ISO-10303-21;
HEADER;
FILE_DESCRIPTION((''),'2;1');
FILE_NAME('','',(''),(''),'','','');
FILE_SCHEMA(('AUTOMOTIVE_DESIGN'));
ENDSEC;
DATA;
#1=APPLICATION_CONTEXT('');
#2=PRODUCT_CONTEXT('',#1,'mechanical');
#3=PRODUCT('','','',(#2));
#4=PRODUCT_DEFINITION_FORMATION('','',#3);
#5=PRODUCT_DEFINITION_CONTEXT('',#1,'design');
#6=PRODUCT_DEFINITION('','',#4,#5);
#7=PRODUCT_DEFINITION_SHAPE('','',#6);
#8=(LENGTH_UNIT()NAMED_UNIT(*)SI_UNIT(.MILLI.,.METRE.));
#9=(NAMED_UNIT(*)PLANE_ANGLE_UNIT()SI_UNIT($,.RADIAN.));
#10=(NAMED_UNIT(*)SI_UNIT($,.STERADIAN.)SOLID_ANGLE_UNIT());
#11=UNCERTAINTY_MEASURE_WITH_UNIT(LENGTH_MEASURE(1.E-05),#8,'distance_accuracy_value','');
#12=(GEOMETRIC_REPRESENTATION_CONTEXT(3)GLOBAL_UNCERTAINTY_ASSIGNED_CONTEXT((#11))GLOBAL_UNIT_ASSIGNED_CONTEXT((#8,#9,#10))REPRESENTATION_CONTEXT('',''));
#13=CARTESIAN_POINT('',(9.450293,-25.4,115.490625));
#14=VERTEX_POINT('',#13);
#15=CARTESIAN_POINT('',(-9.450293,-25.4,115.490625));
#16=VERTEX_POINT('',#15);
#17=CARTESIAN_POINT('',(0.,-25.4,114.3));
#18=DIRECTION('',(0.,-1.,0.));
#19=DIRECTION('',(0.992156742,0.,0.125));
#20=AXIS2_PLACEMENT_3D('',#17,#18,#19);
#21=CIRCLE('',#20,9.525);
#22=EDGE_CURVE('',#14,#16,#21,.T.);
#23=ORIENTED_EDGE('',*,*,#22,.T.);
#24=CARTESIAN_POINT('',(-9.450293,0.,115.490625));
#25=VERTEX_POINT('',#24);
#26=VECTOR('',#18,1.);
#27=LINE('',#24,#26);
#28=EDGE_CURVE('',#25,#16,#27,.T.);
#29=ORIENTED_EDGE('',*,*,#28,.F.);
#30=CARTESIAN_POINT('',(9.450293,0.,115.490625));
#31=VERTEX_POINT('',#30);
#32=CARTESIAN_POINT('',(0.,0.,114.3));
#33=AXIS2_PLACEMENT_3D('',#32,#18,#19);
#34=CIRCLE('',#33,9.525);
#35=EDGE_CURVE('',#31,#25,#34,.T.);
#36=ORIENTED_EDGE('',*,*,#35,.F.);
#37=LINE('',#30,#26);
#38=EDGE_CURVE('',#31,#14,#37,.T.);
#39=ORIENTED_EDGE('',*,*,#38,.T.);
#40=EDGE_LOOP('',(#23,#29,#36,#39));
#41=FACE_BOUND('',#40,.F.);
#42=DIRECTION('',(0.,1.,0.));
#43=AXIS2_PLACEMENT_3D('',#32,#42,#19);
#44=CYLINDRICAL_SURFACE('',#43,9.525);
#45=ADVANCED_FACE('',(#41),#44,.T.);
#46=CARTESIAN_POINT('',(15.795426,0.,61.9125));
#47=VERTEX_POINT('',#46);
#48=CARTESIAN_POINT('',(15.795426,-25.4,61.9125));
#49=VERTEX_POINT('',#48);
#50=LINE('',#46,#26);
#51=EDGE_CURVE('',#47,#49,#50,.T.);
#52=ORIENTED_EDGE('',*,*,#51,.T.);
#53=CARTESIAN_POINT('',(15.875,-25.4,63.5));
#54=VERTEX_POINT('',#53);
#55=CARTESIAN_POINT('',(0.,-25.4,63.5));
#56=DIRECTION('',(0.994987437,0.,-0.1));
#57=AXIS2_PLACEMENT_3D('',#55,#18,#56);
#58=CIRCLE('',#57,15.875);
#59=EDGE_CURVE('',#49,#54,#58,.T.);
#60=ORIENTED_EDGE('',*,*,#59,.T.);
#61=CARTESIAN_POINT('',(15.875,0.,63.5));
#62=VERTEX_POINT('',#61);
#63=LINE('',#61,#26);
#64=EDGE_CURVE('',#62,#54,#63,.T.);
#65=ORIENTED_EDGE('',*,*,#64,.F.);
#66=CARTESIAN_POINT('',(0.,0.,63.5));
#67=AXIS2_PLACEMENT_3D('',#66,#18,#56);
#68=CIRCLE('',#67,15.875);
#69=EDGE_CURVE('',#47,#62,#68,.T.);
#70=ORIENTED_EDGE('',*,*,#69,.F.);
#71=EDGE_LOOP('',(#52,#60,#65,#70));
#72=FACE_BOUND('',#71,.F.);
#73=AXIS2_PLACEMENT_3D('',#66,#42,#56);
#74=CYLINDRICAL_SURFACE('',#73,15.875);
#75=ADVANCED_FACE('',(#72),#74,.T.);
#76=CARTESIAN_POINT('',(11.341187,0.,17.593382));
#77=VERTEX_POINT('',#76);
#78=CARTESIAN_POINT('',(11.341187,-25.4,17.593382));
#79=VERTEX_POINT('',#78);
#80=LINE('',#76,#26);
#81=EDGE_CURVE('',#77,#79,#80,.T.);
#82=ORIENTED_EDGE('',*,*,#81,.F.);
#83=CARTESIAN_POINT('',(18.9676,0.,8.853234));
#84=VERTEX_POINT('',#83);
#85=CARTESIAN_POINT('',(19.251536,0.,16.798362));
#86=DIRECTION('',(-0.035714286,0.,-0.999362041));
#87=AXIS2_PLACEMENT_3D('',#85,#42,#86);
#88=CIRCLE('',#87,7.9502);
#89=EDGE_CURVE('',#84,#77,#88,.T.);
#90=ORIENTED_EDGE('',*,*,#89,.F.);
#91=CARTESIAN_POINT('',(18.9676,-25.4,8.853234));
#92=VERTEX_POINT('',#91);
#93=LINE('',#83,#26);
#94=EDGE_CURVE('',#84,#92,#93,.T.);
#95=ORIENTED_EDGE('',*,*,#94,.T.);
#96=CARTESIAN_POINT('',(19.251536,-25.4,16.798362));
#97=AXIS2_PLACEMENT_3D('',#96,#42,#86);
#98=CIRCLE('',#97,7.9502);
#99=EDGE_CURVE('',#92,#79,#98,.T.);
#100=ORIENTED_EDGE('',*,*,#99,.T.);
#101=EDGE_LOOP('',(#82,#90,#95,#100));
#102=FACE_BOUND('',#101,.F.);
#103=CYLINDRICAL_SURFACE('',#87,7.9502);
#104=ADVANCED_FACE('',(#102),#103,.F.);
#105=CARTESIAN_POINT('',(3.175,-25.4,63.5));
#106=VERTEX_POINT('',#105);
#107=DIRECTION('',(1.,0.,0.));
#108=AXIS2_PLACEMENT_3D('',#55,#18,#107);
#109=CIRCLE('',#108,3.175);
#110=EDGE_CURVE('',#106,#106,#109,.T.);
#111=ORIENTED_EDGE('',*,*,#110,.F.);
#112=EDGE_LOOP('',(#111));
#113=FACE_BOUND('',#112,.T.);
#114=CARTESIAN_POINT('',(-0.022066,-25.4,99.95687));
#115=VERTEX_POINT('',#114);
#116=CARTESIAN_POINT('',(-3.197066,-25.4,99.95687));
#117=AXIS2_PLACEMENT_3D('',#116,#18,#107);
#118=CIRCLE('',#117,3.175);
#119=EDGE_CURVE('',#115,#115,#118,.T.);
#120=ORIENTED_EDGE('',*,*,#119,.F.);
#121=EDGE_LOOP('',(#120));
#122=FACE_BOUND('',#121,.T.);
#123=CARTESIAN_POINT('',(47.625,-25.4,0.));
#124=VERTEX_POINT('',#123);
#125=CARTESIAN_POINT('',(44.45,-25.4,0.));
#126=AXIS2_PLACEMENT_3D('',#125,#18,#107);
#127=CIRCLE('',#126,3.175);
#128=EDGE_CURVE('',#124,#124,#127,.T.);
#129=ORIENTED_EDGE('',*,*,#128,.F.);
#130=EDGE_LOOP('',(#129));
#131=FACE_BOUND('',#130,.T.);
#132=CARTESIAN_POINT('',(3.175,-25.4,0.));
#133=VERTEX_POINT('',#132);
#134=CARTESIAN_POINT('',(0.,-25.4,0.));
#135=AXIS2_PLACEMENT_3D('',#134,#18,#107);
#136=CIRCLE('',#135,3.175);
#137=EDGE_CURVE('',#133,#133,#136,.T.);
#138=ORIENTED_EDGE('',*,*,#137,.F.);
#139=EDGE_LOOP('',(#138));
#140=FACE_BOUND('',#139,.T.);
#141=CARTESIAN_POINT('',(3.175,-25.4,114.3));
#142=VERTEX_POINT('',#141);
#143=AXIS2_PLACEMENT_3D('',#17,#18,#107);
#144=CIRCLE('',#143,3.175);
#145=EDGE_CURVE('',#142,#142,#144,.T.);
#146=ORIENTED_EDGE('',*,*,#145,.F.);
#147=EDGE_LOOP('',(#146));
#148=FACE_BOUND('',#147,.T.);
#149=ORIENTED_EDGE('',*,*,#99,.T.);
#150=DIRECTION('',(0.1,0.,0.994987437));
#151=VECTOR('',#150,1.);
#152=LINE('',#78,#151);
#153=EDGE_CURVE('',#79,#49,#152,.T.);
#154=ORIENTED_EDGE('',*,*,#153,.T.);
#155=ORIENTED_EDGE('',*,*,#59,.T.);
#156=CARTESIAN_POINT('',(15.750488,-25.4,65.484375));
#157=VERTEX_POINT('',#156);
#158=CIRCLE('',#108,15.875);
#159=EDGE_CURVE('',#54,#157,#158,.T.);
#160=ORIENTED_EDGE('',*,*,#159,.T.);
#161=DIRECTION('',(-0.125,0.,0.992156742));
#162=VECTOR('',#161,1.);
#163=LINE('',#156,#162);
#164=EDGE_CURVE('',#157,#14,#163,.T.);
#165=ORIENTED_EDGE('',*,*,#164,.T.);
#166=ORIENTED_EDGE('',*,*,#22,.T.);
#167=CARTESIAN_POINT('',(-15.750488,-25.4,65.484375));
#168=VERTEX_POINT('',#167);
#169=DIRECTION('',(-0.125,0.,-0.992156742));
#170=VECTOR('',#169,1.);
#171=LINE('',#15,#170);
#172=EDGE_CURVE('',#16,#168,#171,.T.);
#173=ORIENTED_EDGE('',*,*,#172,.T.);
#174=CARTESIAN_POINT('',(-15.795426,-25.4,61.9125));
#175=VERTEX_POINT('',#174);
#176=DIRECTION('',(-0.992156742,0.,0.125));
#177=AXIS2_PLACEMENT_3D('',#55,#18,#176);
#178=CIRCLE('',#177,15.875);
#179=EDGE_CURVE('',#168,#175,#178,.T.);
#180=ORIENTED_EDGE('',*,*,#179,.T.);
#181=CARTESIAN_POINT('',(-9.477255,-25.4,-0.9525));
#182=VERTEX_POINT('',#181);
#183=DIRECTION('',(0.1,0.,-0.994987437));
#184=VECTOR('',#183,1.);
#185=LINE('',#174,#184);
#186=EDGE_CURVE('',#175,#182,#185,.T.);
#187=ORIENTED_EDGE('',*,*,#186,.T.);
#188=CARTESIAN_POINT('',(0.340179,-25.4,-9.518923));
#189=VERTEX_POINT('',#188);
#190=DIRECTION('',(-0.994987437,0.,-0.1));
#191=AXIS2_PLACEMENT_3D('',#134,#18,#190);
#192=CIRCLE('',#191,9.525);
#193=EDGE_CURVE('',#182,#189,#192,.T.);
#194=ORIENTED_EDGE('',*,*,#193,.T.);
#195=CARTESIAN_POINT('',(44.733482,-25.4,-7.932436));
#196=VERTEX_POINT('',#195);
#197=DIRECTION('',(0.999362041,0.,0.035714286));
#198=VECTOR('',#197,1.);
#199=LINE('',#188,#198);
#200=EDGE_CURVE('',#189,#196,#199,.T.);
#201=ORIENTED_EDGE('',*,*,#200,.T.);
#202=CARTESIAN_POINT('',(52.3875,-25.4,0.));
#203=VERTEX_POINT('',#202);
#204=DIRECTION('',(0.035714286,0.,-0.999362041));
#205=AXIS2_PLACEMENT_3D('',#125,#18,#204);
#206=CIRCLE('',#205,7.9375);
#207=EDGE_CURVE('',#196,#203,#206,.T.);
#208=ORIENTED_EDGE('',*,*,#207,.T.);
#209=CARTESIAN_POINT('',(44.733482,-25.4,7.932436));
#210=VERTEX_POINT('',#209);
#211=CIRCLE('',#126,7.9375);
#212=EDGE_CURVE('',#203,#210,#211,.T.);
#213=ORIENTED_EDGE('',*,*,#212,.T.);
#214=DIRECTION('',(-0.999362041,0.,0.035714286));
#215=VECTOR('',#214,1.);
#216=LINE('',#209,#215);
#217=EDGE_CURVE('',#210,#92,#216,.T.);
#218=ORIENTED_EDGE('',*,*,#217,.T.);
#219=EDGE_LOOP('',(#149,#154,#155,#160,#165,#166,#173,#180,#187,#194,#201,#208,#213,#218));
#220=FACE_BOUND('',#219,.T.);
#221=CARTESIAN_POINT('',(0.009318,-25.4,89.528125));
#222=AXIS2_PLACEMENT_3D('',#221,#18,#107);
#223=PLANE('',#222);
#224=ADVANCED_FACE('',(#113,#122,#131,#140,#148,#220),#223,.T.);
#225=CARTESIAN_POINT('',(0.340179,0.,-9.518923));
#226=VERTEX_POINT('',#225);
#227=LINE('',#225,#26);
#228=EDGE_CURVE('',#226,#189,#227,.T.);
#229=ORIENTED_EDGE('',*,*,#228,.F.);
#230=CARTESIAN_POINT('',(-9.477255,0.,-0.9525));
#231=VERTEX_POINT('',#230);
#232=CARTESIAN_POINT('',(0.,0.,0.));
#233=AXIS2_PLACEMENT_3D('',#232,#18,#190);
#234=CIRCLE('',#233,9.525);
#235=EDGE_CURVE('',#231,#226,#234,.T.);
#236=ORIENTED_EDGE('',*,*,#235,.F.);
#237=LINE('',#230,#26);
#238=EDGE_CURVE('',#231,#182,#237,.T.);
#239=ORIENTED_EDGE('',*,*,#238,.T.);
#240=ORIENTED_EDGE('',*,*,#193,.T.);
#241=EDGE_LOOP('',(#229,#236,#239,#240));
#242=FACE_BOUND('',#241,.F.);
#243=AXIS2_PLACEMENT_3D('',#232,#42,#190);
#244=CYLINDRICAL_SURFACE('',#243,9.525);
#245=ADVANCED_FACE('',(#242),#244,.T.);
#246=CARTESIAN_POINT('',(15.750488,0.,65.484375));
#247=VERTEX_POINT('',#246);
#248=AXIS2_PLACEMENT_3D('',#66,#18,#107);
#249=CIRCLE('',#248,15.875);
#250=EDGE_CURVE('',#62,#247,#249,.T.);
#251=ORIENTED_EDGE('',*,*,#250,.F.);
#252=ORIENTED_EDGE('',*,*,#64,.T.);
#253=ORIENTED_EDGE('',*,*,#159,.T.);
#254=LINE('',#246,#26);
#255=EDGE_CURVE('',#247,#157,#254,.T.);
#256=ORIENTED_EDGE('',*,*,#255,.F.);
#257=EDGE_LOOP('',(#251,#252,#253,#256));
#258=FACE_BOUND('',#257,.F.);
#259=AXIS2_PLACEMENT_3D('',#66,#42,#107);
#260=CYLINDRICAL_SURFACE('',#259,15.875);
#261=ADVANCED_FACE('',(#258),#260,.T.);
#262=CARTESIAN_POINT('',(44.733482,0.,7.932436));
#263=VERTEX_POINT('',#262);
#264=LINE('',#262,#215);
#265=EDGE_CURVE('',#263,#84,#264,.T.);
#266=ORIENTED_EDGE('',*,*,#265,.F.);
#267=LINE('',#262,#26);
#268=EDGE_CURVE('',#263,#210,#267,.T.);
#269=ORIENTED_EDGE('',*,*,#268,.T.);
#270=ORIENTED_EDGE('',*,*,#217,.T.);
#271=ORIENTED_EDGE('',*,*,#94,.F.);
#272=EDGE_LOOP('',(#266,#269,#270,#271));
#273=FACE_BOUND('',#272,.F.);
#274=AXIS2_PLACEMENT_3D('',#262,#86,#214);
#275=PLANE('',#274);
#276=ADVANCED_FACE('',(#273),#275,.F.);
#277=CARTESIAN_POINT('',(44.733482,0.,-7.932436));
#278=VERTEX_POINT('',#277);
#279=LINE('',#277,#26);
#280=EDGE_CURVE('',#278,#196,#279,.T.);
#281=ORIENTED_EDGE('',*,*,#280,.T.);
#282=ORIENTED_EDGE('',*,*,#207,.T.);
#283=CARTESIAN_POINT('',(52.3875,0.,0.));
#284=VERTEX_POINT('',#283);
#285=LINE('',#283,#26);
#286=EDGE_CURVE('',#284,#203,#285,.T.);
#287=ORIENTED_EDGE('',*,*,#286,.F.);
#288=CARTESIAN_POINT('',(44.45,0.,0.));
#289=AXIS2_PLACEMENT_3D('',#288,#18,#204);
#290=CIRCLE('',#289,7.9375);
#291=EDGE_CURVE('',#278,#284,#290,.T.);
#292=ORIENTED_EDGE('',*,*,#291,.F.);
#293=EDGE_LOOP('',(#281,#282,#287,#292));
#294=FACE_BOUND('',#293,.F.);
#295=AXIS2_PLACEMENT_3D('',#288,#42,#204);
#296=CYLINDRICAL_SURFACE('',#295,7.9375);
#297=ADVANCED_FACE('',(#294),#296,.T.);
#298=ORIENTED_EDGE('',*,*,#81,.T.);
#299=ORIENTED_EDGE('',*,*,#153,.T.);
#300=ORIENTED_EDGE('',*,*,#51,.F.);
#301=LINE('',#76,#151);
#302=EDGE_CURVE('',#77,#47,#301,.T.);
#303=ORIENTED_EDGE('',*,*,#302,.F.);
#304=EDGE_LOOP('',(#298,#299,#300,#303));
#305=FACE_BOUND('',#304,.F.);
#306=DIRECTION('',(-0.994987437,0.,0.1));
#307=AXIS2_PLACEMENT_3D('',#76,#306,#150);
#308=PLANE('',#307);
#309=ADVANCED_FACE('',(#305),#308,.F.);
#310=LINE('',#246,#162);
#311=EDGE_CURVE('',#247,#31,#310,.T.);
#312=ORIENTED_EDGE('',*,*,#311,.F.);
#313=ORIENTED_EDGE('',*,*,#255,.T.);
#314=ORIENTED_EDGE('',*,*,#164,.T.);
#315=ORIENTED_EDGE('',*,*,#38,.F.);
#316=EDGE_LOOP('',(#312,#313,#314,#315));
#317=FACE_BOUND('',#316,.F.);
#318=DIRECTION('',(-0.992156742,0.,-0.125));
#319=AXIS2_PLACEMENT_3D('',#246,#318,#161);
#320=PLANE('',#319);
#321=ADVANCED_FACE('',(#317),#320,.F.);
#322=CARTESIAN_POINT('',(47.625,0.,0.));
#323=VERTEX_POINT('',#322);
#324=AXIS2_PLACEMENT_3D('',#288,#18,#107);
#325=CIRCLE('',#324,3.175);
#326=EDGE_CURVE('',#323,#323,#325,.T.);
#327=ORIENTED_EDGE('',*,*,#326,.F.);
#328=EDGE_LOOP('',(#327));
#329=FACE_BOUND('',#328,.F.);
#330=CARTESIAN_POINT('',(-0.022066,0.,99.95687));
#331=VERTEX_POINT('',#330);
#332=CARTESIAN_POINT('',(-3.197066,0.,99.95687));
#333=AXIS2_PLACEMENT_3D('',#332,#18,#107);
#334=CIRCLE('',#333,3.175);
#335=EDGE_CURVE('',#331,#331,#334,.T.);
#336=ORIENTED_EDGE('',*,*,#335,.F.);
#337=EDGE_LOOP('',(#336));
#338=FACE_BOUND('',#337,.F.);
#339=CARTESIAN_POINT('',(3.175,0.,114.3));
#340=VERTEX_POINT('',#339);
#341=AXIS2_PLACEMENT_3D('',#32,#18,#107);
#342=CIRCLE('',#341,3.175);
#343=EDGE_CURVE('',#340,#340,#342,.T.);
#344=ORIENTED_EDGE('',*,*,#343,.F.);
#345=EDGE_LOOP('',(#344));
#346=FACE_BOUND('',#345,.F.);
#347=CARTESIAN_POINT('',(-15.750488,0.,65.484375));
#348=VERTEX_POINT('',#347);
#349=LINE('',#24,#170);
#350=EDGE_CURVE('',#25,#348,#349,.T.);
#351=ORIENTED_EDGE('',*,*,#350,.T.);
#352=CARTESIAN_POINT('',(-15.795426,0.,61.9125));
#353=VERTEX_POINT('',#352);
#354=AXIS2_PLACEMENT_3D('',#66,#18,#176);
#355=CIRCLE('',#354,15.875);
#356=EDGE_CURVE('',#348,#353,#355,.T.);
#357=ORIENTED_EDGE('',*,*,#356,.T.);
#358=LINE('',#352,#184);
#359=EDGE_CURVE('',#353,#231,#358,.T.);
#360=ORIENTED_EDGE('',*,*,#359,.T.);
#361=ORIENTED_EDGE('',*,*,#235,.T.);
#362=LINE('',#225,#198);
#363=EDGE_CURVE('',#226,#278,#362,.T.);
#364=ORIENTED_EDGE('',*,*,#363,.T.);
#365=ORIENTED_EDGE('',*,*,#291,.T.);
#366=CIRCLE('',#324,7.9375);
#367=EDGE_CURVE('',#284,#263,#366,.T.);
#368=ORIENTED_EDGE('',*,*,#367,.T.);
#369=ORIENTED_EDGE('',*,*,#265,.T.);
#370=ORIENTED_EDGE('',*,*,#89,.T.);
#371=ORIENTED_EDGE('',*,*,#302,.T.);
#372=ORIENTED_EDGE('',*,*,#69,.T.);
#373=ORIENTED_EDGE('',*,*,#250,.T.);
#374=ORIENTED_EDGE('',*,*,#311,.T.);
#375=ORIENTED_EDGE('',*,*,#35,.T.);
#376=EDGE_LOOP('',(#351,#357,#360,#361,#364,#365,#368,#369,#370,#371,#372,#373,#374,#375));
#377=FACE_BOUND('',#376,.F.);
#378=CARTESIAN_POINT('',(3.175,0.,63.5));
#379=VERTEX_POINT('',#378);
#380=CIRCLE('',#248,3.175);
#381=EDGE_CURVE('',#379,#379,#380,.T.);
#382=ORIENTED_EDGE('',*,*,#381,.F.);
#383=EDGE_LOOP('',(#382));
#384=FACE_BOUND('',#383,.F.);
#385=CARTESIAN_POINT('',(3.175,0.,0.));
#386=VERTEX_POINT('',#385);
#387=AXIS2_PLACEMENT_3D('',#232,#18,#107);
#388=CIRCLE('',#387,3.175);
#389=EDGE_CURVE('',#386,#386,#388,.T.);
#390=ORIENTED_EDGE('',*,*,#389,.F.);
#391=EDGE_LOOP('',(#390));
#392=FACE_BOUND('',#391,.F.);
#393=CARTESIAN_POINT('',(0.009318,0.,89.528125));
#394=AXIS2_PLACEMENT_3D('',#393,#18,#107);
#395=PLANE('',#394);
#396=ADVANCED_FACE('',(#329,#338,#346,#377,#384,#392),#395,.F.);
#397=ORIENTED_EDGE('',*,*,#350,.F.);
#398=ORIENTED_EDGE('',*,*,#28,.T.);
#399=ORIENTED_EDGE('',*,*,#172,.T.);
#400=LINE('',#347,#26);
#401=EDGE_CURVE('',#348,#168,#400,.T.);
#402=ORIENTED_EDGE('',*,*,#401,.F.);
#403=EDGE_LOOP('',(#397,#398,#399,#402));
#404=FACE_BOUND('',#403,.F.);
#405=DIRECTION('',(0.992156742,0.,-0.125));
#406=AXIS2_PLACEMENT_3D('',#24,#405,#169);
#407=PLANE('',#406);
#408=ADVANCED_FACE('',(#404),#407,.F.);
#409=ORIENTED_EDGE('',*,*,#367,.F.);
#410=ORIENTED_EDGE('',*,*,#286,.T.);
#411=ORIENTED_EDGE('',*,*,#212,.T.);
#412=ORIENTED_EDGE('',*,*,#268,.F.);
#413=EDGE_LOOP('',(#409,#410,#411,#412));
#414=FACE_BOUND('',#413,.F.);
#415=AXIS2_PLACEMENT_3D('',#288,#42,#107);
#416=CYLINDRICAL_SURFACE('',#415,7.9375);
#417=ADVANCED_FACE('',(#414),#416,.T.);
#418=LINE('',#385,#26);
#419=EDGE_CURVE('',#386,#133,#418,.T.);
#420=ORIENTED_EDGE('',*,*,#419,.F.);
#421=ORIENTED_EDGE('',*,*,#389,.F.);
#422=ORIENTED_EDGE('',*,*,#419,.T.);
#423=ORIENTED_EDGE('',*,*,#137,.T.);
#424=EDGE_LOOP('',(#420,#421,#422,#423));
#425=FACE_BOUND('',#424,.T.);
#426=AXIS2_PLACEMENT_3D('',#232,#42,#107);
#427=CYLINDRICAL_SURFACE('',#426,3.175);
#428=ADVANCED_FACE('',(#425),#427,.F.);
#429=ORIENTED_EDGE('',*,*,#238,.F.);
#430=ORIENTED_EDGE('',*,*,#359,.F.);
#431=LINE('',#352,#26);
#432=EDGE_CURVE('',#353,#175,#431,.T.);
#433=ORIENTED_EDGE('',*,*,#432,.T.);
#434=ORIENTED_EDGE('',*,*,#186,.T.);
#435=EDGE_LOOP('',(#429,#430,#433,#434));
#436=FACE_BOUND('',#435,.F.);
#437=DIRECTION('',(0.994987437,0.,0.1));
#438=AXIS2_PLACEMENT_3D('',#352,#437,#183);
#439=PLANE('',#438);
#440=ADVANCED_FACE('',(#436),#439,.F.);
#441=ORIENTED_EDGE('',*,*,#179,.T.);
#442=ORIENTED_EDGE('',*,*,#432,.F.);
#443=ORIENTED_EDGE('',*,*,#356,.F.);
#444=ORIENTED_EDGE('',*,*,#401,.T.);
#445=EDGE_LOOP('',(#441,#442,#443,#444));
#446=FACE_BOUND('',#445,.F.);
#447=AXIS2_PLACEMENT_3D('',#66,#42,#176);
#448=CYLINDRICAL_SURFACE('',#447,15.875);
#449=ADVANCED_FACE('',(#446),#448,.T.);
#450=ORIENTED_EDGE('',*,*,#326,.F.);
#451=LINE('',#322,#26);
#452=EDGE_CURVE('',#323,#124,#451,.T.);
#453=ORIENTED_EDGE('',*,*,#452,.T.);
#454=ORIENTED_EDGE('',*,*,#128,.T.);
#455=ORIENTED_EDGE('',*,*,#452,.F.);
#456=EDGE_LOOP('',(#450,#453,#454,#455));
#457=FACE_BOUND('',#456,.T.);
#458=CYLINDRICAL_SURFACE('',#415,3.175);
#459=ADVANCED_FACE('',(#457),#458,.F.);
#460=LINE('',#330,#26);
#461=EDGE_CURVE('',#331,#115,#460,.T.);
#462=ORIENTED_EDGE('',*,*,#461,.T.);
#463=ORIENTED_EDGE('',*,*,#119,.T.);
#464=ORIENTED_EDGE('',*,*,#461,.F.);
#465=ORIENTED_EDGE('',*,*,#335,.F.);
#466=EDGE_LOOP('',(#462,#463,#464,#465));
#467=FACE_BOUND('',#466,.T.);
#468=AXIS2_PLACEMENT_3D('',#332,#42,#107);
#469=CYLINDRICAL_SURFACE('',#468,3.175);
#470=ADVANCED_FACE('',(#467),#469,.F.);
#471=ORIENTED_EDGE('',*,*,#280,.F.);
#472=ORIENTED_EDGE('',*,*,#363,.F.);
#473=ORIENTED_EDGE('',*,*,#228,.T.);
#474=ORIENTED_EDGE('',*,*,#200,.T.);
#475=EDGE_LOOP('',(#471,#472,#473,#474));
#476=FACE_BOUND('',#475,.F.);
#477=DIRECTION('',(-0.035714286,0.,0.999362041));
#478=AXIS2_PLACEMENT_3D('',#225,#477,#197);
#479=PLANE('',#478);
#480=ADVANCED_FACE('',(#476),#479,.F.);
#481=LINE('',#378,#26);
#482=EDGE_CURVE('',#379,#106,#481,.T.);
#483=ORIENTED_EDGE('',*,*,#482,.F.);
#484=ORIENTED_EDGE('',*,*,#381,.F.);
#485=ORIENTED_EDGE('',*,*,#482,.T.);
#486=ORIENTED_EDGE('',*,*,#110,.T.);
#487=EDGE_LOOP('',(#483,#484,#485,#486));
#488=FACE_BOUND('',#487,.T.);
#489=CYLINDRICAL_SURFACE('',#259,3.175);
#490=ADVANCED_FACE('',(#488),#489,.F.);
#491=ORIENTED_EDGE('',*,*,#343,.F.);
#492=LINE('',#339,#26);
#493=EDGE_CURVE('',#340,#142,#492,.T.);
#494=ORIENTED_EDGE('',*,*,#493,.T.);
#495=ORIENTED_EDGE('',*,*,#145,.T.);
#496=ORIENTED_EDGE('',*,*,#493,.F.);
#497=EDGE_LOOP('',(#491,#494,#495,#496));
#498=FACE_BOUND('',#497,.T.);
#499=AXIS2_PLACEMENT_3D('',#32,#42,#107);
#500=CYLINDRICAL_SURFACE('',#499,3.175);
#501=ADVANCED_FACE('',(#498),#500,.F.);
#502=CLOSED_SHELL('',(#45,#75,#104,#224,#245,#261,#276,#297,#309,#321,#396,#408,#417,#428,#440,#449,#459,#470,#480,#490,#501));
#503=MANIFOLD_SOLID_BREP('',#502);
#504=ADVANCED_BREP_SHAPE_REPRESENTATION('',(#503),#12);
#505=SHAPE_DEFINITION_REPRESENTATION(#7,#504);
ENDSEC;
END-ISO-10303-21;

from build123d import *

# Parameters (mm, degrees)
F0_R     = 3.175
F1_DEPTH = 25.4


# Not quite as in the source:
# - a feature names something its author has since deleted; it is built from what else it names


with BuildPart() as f1:
    # F0 (on Front) → F1 (new body)
    with BuildSketch(Plane.XZ):
        with BuildLine():
            ThreePointArc((9.4502929642, 115.490625), (9.5063048942, 114.896483242), (9.525, 114.3))
            ThreePointArc((9.525, 114.3), (-0.596483242, 104.7936951058), (-9.4502929642, 115.490625))
            Line((-9.4502929642, 115.490625), (-15.7504882737, 65.484375))
            ThreePointArc((-15.7504882737, 65.484375), (0, 79.375), (15.7504882737, 65.484375))
            Line((15.7504882737, 65.484375), (9.4502929642, 115.490625))
        make_face()
        with Locations((-3.1970662531, 99.956870079)):
            Circle(F0_R, mode=Mode.SUBTRACT)
        with BuildLine():
            ThreePointArc((15.7954255641, 61.9125), (0, 47.625), (-15.7954255641, 61.9125))
            Line((-15.7954255641, 61.9125), (-9.4772553384, -0.9525))
            ThreePointArc((-9.4772553384, -0.9525), (-0.4768479324, 9.5130563464), (9.525, 0))
            ThreePointArc((9.525, 0), (6.8544082857, -6.6138273378), (0.3401785714, -9.5189234444))
            Line((0.3401785714, -9.5189234444), (44.7334821429, -7.9324362036))
            ThreePointArc((44.7334821429, -7.9324362036), (36.5125, 0), (44.7334821429, 7.9324362036))
            Line((44.7334821429, 7.9324362036), (18.9676000005, 8.8532337108))
            ThreePointArc((18.9676000005, 8.8532337108), (13.2611998974, 11.5713591498), (11.3411865923, 17.5933818124))
            Line((11.3411865923, 17.5933818124), (15.7954255641, 61.9125))
        make_face()
        with BuildLine():
            ThreePointArc((-9.4502929642, 115.490625), (-0.596483242, 104.7936951058), (9.525, 114.3))
            ThreePointArc((9.525, 114.3), (9.5063048942, 114.896483242), (9.4502929642, 115.490625))
            ThreePointArc((9.4502929642, 115.490625), (0, 123.825), (-9.4502929642, 115.490625))
        make_face()
        with Locations((0, 114.3)):
            Circle(F0_R, mode=Mode.SUBTRACT)
        with BuildLine():
            ThreePointArc((15.875, 63.5), (15.8438414904, 64.4941387366), (15.7504882737, 65.484375))
            ThreePointArc((15.7504882737, 65.484375), (0, 79.375), (-15.7504882737, 65.484375))
            ThreePointArc((-15.7504882737, 65.484375), (-15.8737438155, 63.6997054867), (-15.7954255641, 61.9125))
            ThreePointArc((-15.7954255641, 61.9125), (0, 47.625), (15.7954255641, 61.9125))
            ThreePointArc((15.7954255641, 61.9125), (15.8550939106, 62.7052534459), (15.875, 63.5))
        make_face()
        with Locations((0, 63.5)):
            Circle(F0_R, mode=Mode.SUBTRACT)
        with BuildLine():
            ThreePointArc((9.525, 0), (-0.4768479324, 9.5130563464), (-9.4772553384, -0.9525))
            ThreePointArc((-9.4772553384, -0.9525), (-6.2623833816, -7.1769199091), (0.3401785714, -9.5189234444))
            ThreePointArc((0.3401785714, -9.5189234444), (6.8544082857, -6.6138273378), (9.525, 0))
        make_face()
        Circle(F0_R, mode=Mode.SUBTRACT)
        with BuildLine():
            ThreePointArc((44.7334821429, 7.9324362036), (36.5125, 0), (44.7334821429, -7.9324362036))
            ThreePointArc((44.7334821429, -7.9324362036), (50.1620069047, -5.5115227815), (52.3875, 0))
            ThreePointArc((52.3875, 0), (50.1620069047, 5.5115227815), (44.7334821429, 7.9324362036))
        make_face()
        with Locations((44.45, 0)):
            Circle(F0_R, mode=Mode.SUBTRACT)
    extrude(amount=F1_DEPTH)


solid = f1.part
